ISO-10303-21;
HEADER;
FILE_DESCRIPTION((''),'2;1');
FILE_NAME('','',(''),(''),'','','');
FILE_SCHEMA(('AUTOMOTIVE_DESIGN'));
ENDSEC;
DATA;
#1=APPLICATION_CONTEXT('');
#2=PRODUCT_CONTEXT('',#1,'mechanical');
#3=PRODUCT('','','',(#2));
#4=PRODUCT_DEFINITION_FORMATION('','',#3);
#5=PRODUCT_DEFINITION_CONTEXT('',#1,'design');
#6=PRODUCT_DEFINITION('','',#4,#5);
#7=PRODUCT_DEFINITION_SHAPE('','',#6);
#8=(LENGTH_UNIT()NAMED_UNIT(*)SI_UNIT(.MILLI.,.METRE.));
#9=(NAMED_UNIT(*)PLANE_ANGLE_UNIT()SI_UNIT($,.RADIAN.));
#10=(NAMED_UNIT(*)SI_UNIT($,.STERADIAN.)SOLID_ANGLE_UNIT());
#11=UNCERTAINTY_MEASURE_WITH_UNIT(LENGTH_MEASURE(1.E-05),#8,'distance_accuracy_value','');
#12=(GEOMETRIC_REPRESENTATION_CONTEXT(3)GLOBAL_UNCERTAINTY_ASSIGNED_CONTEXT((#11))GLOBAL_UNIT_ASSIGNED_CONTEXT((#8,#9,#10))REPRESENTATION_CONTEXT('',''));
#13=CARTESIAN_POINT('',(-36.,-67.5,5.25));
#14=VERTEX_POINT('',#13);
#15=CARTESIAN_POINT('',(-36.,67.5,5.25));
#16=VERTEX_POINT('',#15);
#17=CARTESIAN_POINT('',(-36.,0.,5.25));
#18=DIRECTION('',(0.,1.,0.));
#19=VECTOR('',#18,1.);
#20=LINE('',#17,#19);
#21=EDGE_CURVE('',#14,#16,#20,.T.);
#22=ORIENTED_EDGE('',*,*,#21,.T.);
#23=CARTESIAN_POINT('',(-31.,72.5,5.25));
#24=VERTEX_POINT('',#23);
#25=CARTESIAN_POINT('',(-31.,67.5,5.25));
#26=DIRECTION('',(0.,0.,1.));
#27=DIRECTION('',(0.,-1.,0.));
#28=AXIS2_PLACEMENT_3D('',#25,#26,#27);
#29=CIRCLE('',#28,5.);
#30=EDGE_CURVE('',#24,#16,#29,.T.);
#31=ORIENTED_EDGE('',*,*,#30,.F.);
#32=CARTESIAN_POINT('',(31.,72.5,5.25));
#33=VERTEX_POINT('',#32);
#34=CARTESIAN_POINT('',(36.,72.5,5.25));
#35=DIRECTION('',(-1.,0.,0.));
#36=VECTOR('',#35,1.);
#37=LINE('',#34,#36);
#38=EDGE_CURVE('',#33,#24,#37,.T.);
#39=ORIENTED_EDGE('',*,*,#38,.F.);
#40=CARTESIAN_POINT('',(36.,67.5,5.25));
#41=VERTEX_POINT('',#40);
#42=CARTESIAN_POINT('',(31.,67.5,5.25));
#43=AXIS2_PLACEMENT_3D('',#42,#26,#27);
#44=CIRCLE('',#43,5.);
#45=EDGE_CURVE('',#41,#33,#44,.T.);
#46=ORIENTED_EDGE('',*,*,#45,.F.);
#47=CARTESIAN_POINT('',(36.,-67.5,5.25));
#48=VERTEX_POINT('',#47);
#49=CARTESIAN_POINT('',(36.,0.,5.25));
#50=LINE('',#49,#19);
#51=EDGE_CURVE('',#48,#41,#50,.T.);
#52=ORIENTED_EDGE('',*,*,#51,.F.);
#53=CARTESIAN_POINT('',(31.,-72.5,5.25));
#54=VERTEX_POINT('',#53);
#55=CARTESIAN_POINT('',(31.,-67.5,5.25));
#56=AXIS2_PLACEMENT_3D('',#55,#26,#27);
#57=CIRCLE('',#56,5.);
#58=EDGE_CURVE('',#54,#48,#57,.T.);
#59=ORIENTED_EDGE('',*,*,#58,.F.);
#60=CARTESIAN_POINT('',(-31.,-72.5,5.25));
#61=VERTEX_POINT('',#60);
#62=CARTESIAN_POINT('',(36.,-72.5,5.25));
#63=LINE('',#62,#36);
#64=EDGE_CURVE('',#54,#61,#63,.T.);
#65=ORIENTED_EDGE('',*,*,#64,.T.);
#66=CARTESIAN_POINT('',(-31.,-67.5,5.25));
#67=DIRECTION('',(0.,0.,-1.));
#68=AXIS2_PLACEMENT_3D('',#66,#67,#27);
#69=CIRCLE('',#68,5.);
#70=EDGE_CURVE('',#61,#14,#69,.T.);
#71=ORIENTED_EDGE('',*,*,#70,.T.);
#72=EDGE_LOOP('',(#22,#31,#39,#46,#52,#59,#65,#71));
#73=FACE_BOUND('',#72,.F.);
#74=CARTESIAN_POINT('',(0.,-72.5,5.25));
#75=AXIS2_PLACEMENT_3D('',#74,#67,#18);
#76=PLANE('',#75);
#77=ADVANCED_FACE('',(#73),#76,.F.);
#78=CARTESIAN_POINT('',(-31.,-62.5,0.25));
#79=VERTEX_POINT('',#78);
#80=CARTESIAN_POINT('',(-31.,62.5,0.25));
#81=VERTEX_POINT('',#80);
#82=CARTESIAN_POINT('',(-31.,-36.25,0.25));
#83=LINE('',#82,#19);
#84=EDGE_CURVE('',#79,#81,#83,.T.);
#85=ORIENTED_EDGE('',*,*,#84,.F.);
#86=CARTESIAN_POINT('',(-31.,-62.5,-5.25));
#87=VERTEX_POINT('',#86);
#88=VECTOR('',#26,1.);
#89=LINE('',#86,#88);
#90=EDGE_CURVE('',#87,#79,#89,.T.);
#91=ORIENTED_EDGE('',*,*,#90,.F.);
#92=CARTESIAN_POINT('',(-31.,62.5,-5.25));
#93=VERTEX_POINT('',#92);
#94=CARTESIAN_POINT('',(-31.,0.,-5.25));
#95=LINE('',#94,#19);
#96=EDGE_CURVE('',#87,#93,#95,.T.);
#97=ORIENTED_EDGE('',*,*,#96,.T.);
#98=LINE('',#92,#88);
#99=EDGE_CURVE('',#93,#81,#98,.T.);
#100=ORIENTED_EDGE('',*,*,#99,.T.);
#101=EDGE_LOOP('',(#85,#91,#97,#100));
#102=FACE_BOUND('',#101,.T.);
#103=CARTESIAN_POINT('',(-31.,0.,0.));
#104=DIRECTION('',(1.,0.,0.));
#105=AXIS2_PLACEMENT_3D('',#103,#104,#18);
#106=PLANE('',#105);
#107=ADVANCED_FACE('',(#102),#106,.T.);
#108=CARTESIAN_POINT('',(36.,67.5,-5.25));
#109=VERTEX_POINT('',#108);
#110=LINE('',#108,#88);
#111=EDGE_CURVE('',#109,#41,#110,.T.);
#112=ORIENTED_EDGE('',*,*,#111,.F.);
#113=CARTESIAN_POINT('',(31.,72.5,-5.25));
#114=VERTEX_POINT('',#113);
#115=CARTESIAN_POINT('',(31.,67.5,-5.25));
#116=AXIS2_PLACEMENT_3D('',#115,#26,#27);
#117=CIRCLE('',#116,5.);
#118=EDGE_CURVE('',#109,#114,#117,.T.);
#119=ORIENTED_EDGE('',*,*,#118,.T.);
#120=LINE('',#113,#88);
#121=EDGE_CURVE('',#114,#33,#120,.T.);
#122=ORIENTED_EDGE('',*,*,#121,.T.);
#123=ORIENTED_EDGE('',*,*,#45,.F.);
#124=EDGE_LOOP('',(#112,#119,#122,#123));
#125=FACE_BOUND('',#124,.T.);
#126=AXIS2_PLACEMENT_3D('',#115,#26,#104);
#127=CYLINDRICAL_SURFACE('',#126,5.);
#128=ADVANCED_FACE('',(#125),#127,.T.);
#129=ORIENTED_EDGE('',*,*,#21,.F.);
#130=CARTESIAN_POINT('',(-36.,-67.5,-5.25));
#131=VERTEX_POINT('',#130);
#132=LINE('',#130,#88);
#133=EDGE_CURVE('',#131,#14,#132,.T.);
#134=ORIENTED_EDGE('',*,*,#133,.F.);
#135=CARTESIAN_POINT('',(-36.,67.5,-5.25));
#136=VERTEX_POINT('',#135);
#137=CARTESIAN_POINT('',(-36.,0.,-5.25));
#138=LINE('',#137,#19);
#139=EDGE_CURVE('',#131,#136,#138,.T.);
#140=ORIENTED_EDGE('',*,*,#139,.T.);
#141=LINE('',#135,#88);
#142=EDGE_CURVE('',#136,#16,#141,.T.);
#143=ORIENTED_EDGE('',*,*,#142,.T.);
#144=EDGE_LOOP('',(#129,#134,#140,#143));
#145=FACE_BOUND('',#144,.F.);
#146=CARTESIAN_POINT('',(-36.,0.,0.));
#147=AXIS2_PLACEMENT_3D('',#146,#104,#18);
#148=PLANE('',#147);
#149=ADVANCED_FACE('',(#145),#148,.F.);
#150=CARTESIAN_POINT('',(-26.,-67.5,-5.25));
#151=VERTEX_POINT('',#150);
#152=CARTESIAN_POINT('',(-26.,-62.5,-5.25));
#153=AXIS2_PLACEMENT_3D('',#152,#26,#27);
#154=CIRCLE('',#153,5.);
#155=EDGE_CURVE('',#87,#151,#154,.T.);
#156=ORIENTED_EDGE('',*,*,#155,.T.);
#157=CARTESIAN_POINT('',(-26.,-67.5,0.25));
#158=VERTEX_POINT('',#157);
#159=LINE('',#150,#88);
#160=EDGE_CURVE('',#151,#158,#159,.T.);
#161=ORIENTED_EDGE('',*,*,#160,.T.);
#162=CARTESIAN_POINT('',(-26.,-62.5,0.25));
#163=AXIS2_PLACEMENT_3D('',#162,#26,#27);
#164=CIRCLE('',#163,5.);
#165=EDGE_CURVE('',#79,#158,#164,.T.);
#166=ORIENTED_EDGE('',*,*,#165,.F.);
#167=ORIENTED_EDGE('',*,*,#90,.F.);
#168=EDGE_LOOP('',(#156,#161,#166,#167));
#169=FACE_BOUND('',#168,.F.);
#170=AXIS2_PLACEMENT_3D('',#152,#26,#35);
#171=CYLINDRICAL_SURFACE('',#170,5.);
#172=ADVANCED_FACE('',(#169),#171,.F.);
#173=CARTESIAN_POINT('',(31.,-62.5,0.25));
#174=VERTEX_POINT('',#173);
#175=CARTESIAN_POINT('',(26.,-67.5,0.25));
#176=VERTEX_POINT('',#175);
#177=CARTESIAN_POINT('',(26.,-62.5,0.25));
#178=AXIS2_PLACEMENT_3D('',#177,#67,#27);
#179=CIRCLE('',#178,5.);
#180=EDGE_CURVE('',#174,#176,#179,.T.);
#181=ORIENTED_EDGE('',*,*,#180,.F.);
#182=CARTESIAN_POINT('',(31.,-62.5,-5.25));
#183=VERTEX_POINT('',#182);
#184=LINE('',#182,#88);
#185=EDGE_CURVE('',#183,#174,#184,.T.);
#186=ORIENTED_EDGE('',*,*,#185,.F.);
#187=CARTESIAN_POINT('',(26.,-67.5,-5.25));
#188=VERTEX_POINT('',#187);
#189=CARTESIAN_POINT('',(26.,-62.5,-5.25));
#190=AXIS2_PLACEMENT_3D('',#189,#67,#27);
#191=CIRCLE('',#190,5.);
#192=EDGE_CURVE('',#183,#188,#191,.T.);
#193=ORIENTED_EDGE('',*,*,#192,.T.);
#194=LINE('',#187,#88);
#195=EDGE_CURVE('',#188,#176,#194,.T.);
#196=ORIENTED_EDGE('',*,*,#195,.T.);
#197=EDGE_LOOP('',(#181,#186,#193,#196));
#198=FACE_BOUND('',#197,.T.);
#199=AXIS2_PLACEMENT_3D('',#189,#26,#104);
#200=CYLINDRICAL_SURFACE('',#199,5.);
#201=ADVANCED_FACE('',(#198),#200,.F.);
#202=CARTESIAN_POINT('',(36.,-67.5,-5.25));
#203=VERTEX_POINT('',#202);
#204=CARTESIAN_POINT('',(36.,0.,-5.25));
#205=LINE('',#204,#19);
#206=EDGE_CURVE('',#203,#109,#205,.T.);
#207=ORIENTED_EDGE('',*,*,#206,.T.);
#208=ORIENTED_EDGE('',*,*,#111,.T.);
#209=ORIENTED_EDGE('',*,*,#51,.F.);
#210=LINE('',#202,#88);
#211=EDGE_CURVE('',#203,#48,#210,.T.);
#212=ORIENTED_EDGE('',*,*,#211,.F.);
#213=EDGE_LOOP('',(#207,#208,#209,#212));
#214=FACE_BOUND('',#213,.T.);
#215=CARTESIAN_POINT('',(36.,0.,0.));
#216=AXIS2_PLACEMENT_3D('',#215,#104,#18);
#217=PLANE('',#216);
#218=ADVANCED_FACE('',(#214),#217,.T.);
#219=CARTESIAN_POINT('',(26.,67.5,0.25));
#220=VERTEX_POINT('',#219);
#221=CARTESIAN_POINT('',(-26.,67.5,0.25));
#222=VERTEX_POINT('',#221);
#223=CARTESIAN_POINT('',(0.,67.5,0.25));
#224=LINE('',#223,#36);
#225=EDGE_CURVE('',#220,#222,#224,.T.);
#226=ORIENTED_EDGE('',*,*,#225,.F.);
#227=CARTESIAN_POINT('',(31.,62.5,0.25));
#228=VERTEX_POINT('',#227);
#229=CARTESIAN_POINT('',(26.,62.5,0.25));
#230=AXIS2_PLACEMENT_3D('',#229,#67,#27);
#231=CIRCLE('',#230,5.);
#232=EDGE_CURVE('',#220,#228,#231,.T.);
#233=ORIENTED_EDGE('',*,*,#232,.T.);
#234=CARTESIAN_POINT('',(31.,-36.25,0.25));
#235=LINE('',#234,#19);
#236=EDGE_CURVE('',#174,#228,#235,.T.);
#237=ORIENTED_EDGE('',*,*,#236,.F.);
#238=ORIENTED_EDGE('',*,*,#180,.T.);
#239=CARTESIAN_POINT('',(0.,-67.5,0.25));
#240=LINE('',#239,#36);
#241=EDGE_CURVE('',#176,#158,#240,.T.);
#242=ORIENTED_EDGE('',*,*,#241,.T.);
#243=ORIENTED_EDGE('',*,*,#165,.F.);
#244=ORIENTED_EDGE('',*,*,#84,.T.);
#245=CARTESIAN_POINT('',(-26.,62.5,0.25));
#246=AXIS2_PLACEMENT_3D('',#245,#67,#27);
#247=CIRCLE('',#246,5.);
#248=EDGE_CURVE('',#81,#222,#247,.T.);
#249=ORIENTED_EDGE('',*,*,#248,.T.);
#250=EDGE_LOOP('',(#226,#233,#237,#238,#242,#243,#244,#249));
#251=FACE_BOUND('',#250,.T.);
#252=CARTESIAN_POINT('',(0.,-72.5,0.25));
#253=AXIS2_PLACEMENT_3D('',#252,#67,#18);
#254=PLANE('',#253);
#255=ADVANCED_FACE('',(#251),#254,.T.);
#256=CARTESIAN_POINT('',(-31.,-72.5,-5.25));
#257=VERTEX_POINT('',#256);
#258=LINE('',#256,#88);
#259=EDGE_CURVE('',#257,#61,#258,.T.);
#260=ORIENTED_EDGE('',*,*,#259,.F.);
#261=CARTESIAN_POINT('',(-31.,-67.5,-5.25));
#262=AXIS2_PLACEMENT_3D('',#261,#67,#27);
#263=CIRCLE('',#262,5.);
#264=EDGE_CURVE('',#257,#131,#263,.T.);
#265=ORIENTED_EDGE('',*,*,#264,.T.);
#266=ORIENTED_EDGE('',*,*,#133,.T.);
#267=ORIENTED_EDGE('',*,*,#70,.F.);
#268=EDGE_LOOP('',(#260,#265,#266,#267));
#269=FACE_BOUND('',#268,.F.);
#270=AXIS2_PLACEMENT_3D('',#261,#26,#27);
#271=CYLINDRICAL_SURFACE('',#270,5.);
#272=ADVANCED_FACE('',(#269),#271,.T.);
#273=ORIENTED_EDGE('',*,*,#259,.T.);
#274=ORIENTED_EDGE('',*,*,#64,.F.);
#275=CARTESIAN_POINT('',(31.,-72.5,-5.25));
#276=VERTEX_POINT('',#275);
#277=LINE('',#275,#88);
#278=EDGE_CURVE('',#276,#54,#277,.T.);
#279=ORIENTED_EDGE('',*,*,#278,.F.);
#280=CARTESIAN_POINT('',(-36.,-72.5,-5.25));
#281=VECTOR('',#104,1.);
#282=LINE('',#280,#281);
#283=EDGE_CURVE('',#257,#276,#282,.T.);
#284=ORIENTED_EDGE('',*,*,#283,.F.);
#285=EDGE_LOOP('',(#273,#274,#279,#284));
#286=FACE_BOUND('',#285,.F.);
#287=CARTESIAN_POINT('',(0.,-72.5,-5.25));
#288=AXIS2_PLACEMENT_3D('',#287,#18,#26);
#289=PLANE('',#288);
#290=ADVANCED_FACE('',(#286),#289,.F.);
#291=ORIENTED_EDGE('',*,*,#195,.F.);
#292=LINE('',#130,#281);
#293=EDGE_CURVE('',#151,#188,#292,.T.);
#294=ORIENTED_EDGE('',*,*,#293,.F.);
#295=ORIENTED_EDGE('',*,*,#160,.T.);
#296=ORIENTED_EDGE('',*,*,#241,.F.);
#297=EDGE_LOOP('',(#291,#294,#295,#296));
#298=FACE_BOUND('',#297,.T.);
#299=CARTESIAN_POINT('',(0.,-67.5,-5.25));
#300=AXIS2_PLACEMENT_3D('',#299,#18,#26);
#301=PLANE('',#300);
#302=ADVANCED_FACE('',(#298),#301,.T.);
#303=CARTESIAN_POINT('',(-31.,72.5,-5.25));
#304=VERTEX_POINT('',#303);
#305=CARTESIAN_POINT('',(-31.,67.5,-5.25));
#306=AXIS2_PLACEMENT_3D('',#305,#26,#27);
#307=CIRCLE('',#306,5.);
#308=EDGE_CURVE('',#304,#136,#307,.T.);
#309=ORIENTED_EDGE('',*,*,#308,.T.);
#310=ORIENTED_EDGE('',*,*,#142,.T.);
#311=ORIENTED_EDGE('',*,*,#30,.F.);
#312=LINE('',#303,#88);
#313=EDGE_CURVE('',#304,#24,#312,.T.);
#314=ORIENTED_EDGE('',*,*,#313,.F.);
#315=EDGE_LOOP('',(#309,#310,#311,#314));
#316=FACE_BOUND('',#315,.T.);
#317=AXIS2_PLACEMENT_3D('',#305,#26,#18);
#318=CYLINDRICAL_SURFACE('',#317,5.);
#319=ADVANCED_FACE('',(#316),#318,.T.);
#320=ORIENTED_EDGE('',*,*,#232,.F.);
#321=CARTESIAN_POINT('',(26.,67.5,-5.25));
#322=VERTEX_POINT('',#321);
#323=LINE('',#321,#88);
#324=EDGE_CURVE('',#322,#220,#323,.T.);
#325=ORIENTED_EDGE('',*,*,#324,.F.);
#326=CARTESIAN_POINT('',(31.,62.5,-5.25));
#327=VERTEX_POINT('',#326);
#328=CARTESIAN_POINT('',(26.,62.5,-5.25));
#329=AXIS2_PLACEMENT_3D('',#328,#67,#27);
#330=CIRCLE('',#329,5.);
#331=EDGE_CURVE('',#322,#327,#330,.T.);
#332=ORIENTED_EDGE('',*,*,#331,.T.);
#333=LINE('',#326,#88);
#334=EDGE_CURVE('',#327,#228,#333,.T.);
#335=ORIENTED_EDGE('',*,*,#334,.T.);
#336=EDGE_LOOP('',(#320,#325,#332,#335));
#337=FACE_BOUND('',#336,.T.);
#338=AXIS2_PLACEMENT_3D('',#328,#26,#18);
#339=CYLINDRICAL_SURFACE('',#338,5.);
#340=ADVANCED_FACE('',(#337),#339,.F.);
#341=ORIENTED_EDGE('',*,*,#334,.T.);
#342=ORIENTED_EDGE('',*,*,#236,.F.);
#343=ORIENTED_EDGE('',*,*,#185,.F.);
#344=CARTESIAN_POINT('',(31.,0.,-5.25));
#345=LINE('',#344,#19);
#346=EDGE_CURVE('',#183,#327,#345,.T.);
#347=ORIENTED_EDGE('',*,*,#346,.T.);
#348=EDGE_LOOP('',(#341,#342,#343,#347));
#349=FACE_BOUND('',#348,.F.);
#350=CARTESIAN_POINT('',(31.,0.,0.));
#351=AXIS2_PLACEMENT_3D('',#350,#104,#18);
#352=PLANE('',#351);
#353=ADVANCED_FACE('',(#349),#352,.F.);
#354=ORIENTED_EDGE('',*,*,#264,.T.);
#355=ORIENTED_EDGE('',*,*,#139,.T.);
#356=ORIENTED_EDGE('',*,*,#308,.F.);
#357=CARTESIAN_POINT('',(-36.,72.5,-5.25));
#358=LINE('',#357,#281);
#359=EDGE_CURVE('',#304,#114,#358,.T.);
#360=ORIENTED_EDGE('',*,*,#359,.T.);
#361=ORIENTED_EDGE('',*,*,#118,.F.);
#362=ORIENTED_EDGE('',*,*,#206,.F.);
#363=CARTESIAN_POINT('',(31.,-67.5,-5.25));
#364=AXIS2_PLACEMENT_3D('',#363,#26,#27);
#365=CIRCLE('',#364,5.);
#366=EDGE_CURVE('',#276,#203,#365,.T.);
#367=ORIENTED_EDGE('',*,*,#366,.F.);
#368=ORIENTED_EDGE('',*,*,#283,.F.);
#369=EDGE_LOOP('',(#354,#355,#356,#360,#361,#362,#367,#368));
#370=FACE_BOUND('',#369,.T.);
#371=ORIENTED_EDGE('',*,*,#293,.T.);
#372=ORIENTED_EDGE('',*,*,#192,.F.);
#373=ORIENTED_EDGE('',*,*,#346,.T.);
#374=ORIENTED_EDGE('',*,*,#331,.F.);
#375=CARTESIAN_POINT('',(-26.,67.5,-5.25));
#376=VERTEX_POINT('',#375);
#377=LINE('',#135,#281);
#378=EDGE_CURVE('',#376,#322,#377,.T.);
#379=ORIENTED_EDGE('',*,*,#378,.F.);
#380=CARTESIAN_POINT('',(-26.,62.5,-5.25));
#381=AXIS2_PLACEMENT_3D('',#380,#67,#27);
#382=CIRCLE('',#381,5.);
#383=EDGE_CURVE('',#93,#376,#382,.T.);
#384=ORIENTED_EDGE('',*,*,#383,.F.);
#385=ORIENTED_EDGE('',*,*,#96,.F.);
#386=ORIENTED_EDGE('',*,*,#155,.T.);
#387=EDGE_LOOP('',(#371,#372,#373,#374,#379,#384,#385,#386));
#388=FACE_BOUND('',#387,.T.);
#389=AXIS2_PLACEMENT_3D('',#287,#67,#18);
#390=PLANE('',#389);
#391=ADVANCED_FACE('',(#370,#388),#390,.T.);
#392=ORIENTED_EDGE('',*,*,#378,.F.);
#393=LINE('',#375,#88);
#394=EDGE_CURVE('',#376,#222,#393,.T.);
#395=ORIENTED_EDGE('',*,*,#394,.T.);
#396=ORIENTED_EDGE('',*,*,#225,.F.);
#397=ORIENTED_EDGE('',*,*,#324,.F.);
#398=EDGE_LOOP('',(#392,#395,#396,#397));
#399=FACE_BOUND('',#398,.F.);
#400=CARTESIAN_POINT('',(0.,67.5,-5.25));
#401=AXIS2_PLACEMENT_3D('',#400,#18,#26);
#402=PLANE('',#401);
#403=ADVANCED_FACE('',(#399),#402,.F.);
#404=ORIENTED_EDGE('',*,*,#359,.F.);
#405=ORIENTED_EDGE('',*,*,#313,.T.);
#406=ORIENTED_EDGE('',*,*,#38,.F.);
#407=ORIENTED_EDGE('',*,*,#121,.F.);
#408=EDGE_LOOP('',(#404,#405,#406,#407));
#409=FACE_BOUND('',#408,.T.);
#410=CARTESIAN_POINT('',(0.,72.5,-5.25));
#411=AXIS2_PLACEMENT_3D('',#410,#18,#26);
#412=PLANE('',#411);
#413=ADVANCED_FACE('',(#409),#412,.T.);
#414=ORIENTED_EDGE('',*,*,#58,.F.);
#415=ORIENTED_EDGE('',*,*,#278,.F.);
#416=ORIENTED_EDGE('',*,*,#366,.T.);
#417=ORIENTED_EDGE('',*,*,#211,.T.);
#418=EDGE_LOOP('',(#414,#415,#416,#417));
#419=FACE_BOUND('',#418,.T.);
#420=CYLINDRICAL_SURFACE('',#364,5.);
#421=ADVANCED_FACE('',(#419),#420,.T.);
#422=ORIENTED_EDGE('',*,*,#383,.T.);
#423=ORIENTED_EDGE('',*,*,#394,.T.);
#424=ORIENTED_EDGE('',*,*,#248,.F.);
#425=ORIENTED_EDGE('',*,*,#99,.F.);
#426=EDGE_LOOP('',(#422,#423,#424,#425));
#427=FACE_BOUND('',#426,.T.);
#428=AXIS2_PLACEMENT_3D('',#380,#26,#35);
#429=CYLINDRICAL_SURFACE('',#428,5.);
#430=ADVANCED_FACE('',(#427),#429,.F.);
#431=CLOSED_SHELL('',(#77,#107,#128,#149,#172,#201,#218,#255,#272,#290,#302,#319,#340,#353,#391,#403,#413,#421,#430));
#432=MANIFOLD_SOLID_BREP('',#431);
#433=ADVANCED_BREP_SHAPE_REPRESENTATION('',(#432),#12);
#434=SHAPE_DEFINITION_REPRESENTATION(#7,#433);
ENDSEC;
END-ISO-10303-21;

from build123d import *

# Parameters (mm, degrees)
F0_W     = 145
F0_H     = 10.5
F1_DEPTH = 36
F2_R     = 5
F3_T     = 5
F4_R     = 5


# Not quite as in the source:
# - a shell that OpenCascade refuses in one call is made with other operations: the cavity is built on its own and cut out


with BuildPart() as f1:
    # F0 (on Right) → F1 (new body, symmetric)
    with BuildSketch(Plane.YZ):
        Rectangle(F0_W, F0_H)
    extrude(amount=F1_DEPTH, both=True)

    # F2
    f2_edges = [f1.edges().sort_by_distance(p)[0] for p in [
        (36, -72.5, 0),
        (36, 72.5, 0),
        (-36, -72.5, 0),
        (-36, 72.5, 0),
    ]]
    fillet(f2_edges, radius=F2_R)

    # F3: shell of thickness 5, made by hand


with BuildPart() as f3_core1:
    # F3_t2: copy of F1
    add(f1.part)

    # the walls: a layer under each face that stays
    f3_faces = [f3_core1.faces().sort_by_distance(p)[0] for p in [
        (-36, 0, 0),
        (0, -72.5, 0),
        (0, 72.5, 0),
        (36, 0, 0),
        (0, 0, 5.25),
    ]]
    thicken(f3_faces, amount=-F3_T, mode=Mode.SUBTRACT)


with BuildPart() as f1_1:
    add(f1.part)

    # what is left inside the walls is the cavity
    f3_cavity = [f3_core1.part.solids().sort_by_distance(p)[0] for p in [
        (-10.333333, 0, -5.2),
    ]]
    add(f3_cavity, mode=Mode.SUBTRACT)

    # F4
    f4_edges = [f1_1.edges().sort_by_distance(p)[0] for p in [
        (-31, -67.5, -2.5),
        (31, -67.5, -2.5),
        (-31, 67.5, -2.5),
        (31, 67.5, -2.5),
    ]]
    fillet(f4_edges, radius=F4_R)


solid = f1_1.part
